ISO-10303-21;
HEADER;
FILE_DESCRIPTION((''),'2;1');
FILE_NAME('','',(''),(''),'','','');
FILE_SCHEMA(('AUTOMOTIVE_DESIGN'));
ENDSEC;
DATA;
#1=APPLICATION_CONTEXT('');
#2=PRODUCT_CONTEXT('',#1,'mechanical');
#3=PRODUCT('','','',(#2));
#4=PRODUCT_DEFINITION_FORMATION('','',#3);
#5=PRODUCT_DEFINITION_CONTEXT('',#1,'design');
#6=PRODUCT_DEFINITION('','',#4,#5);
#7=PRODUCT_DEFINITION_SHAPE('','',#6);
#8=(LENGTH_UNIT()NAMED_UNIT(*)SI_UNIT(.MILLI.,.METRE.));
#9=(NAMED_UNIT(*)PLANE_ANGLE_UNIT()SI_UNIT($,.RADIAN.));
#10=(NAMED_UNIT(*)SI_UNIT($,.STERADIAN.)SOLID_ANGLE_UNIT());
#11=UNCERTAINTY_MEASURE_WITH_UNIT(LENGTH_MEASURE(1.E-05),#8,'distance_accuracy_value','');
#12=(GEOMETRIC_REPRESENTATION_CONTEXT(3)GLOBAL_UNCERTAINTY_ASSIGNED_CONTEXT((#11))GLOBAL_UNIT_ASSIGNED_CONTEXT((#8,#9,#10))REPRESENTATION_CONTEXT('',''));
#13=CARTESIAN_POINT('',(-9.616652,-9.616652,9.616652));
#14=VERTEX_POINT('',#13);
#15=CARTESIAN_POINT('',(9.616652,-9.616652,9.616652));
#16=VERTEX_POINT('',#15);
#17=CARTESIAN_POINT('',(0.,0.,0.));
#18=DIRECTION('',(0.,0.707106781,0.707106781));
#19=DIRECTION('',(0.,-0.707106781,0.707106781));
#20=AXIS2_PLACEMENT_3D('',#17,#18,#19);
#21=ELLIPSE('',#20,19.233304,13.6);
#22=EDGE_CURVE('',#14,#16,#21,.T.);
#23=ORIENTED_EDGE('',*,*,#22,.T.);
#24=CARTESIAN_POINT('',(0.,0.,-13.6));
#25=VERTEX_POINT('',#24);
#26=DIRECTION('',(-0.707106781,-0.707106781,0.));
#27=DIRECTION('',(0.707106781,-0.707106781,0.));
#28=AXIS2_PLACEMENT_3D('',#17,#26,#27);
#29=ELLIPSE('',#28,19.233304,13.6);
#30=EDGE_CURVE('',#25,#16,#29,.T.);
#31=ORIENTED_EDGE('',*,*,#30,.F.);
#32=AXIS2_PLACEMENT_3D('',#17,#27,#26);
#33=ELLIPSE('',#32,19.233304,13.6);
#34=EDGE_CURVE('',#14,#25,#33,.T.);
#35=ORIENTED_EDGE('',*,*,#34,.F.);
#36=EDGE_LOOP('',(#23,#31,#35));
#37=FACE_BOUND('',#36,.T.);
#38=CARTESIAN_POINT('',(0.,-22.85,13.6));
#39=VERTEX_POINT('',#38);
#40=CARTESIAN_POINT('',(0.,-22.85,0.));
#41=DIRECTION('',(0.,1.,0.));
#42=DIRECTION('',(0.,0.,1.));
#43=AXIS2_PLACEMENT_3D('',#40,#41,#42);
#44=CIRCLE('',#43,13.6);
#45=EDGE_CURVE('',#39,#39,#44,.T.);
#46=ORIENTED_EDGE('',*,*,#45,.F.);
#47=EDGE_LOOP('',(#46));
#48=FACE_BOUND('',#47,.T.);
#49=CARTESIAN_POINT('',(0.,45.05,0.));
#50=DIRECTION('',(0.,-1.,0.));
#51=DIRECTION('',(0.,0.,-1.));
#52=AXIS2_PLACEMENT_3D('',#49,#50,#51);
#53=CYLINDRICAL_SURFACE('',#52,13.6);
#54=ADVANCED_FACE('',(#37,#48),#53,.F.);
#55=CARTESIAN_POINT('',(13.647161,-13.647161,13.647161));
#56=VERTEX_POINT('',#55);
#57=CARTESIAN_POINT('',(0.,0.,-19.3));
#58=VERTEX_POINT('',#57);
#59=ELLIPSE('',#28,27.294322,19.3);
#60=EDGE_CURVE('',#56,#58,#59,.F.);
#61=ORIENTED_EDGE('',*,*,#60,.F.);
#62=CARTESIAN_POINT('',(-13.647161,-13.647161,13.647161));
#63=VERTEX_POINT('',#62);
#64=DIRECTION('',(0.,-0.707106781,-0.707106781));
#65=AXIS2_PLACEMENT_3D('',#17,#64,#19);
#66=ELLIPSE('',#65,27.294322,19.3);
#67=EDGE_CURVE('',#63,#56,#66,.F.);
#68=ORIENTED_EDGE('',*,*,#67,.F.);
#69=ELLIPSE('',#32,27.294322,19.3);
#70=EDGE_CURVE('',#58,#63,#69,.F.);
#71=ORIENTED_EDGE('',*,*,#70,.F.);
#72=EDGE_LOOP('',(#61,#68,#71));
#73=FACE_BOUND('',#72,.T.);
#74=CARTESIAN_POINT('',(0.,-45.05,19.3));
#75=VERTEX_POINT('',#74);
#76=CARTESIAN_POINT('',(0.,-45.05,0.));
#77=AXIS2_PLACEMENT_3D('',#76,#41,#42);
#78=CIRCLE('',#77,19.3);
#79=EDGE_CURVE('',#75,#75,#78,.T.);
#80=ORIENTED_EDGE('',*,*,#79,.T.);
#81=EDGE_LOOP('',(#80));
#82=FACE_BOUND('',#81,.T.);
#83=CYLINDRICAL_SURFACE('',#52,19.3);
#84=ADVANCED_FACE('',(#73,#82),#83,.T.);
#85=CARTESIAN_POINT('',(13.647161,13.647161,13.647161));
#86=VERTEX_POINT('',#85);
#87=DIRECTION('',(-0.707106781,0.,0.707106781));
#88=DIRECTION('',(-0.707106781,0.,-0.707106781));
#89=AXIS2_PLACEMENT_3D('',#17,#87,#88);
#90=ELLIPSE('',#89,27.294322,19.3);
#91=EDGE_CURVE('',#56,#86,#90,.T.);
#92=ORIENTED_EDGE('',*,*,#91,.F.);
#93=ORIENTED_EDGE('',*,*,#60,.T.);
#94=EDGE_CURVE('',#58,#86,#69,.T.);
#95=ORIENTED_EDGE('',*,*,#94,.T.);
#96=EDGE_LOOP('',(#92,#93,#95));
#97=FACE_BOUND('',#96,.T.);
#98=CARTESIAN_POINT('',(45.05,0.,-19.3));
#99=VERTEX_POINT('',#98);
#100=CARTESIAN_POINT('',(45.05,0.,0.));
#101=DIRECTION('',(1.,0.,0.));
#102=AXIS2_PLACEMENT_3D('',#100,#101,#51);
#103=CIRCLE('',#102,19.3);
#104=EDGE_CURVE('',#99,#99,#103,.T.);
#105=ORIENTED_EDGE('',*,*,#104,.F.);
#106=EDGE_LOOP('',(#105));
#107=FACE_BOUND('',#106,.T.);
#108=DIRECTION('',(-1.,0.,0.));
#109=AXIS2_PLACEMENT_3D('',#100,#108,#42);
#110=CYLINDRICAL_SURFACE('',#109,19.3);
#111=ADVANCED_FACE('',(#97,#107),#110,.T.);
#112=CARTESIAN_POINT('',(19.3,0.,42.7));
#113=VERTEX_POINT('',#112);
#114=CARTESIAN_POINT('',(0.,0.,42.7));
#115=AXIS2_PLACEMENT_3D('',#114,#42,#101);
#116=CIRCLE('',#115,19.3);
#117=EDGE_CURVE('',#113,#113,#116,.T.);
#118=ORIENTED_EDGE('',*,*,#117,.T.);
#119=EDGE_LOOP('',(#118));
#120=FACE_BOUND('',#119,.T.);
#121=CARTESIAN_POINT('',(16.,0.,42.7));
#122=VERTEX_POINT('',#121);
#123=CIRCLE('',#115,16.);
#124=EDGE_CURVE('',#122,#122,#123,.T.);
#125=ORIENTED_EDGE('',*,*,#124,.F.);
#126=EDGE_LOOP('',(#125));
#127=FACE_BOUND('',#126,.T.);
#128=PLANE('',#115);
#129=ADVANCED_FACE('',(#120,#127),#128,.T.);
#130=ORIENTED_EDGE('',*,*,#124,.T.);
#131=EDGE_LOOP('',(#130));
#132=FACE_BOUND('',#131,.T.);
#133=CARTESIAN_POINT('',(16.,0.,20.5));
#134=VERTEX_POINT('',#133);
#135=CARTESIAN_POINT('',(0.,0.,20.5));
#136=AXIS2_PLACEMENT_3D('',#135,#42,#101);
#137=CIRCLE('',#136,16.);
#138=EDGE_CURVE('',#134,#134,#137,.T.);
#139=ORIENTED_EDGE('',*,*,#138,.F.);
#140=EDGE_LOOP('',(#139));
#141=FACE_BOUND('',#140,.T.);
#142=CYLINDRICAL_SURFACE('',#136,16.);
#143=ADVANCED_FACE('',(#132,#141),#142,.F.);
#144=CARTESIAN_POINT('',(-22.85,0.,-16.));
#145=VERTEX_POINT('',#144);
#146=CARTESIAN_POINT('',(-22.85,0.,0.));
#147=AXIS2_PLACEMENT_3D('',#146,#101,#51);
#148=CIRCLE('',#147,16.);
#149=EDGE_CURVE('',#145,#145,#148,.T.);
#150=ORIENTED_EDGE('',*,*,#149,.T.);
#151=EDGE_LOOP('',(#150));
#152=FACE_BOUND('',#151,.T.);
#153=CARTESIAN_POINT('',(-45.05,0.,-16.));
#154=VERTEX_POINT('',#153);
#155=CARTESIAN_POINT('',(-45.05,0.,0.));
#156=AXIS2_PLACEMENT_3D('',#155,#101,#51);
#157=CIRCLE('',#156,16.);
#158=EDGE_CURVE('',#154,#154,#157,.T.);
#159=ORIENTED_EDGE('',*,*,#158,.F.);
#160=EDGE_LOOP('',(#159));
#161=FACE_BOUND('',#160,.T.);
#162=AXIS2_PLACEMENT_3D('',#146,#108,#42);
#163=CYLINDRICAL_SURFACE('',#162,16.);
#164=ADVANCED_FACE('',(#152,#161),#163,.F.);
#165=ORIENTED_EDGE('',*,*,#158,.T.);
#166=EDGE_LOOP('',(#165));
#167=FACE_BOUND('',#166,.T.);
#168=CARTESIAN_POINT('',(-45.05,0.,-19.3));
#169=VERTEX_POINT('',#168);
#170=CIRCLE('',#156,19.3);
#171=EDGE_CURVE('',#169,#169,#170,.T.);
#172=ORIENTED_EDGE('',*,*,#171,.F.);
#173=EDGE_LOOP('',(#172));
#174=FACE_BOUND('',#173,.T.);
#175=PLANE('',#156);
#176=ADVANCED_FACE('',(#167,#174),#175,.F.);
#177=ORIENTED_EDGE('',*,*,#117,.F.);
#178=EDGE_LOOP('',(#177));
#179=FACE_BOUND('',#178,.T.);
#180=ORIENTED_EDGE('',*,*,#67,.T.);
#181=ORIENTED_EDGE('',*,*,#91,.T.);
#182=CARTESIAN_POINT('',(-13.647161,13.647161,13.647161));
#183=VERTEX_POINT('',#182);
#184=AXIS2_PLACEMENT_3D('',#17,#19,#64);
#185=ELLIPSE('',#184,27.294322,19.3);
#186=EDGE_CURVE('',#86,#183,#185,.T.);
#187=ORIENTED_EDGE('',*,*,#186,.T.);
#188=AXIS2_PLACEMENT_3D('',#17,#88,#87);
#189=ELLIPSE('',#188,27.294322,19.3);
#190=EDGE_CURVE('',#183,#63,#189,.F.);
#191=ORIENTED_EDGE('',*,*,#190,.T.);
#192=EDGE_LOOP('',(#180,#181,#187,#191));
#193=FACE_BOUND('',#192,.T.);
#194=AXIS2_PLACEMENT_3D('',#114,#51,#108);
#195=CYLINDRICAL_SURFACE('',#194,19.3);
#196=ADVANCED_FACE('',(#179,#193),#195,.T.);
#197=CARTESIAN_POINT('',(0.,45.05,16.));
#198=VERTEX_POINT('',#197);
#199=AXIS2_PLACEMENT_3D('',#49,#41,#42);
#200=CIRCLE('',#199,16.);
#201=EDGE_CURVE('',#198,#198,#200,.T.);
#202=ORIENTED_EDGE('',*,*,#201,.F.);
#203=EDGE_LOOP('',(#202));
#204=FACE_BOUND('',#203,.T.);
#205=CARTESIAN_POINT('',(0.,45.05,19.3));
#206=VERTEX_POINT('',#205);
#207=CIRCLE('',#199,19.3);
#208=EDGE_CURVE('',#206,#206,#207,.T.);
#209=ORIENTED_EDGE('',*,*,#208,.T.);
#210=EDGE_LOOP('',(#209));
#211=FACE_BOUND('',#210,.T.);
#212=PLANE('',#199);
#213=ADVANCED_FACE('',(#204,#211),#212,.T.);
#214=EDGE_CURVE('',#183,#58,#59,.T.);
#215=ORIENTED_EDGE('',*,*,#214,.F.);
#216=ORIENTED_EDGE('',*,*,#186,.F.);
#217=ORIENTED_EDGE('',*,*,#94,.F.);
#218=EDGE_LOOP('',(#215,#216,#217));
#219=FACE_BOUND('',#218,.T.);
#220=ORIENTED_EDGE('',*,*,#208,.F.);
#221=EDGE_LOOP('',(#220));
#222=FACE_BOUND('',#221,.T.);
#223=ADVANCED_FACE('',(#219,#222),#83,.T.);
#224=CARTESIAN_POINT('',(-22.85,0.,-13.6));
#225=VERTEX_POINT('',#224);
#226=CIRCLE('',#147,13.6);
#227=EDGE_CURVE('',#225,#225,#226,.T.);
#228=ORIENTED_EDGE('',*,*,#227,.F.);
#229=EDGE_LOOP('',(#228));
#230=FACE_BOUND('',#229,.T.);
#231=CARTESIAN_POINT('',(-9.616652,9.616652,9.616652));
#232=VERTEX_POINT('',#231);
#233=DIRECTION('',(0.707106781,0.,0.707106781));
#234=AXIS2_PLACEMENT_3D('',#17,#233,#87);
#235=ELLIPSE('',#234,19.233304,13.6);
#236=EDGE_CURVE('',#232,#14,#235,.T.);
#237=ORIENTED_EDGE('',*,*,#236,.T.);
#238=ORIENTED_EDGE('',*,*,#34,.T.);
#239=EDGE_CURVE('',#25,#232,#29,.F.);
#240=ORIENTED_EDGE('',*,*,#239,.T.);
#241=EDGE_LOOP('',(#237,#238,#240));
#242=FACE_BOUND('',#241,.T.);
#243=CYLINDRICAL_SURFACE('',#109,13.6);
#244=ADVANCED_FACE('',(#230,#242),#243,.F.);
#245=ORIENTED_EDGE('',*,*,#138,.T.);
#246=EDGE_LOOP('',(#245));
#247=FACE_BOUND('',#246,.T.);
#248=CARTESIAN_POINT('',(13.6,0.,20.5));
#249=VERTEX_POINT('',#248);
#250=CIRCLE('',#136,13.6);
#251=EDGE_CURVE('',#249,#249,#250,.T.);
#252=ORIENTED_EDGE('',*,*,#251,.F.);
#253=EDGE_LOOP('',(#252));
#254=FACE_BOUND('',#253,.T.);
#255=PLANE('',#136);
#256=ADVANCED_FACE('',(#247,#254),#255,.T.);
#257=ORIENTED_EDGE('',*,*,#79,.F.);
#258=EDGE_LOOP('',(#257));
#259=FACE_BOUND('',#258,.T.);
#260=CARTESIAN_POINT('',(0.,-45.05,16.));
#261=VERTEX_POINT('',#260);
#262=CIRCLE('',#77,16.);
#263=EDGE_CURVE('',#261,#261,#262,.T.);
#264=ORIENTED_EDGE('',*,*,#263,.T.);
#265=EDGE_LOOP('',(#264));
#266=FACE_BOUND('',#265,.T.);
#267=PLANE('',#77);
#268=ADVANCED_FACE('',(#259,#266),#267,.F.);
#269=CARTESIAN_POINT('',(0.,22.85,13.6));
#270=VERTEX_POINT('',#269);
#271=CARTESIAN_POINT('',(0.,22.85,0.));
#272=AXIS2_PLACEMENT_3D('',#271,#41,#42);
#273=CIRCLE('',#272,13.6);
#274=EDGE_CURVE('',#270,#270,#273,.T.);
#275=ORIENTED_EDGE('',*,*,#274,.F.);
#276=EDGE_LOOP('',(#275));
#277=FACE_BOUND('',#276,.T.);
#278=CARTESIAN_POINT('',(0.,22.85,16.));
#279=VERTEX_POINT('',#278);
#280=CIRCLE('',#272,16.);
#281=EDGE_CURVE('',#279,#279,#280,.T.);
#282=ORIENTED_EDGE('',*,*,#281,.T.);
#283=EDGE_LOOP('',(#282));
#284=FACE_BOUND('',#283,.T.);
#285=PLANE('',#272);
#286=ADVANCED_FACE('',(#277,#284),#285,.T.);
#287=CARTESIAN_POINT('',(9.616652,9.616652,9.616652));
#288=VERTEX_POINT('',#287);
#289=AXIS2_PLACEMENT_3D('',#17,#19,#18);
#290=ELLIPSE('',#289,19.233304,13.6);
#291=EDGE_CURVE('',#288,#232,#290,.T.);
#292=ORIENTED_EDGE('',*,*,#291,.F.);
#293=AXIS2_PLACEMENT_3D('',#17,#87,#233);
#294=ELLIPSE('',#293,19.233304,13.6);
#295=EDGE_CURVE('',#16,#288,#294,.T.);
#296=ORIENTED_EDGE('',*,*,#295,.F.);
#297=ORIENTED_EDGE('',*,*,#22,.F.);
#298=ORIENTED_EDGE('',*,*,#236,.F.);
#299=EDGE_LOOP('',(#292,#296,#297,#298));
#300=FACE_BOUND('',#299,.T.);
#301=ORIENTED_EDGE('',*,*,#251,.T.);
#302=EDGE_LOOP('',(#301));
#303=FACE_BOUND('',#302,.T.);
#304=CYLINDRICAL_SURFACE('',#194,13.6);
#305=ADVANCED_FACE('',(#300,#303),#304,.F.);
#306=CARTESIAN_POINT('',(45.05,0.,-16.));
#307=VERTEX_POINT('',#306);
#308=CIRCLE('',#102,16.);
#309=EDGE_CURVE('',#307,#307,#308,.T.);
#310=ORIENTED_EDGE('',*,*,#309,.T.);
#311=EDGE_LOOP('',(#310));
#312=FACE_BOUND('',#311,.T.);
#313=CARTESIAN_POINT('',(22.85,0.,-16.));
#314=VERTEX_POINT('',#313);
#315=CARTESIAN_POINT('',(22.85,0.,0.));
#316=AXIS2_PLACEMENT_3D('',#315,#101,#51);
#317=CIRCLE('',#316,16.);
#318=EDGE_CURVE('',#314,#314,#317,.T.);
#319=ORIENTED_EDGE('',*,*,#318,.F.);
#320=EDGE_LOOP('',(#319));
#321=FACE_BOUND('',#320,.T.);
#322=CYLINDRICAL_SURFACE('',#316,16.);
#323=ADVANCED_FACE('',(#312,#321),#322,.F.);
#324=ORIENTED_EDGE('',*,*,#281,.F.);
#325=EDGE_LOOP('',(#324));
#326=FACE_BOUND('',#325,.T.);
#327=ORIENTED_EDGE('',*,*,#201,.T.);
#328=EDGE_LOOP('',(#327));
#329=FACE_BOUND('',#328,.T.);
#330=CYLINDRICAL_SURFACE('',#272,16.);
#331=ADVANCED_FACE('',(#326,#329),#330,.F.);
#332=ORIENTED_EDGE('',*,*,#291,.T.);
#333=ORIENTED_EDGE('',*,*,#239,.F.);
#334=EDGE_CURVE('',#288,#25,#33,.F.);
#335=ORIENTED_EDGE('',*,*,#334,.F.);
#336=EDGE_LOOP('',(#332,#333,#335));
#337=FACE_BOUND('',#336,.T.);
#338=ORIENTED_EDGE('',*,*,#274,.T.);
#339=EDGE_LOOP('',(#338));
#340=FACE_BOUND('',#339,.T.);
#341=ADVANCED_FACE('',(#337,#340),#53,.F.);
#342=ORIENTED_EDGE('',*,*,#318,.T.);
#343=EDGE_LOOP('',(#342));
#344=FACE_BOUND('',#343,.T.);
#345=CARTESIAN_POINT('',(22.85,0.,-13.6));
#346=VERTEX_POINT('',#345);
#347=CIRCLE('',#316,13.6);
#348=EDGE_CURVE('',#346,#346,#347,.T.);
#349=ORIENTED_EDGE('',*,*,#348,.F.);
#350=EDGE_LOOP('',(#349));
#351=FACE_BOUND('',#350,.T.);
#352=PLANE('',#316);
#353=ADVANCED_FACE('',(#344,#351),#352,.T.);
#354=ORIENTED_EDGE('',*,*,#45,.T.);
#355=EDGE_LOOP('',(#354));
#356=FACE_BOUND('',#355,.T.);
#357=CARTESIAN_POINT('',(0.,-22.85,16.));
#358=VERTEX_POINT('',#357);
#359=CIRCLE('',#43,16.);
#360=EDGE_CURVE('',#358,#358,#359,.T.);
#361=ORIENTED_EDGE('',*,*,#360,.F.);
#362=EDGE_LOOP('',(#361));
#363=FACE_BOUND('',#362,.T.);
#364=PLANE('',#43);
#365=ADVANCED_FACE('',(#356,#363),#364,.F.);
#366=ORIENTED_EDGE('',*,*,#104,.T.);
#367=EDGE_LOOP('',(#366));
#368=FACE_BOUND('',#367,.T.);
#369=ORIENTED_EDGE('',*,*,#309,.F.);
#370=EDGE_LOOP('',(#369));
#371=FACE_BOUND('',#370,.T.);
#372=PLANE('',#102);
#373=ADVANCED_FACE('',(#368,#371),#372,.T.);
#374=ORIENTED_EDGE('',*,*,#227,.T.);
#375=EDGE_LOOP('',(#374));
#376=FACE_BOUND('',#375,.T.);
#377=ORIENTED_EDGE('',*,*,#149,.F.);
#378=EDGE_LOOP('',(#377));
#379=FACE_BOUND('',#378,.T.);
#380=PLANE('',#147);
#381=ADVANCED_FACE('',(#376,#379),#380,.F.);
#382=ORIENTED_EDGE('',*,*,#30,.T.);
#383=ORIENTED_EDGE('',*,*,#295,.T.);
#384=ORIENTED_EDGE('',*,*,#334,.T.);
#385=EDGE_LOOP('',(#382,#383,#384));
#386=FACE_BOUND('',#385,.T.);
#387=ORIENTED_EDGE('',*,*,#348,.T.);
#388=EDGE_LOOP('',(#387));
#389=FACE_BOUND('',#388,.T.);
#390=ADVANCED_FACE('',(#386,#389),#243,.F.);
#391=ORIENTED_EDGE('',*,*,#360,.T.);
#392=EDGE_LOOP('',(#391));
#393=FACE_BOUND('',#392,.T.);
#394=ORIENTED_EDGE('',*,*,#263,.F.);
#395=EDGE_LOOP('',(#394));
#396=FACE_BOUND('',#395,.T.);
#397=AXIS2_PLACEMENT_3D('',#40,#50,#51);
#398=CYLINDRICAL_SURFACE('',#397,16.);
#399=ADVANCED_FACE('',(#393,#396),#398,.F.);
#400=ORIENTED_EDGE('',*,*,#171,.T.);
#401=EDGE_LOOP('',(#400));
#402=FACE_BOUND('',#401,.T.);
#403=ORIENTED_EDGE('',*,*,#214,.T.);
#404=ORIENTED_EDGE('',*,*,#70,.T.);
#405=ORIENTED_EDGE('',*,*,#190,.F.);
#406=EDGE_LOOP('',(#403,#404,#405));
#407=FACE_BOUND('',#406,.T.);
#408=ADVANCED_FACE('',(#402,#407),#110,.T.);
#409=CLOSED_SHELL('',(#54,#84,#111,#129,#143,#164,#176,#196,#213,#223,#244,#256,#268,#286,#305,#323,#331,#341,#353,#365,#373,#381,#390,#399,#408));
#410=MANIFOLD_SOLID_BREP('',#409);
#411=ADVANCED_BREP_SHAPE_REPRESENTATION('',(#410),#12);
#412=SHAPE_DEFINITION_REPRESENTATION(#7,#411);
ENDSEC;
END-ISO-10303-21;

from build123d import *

# Parameters (mm, degrees)
SKETCH_1_R               = 19.3
SKETCH_1_R_2             = 13.6
EXTRUDE_1_DEPTH          = 45.05
SKETCH_3_R               = 19.3
SKETCH_3_R_2             = 13.6
EXTRUDE_3_DEPTH          = 45.05
SKETCH_2_R               = 19.3
SKETCH_2_R_2             = 13.6
EXTRUDE_2_DEPTH          = 42.7
CUT_EXTRUDE_1_DEPTH      = 77.696121327
CUT_EXTRUDE_1_DEPTH_BACK = 77.696121327
SKETCH_1_13_R            = 13.6
CUT_EXTRUDE_START        = -19.3000001
CUT_EXTRUDE_2_OUTLINE_R  = 13.6
CUT_EXTRUDE_2_DEPTH      = 38.6000002
CUT_EXTRUDE_START_2      = 9.616652
SKETCH_2_8_R             = 13.6
CUT_EXTRUDE_3_DEPTH      = 9.683348
CUT_EXTRUDE_START_3      = -45.05
SKETCH_1_15_R            = 16
CUT_EXTRUDE_4_DEPTH      = 22.2
CUT_EXTRUDE_START_4      = 22.85
SKETCH_1_16_R            = 16
CUT_EXTRUDE_5_DEPTH      = 22.2
SKETCH_3_9_R             = 16
CUT_EXTRUDE_6_DEPTH      = 22.2
SKETCH_3_10_R            = 16
CUT_EXTRUDE_7_DEPTH      = 22.2
CUT_EXTRUDE_START_5      = 20.5
SKETCH_2_9_R             = 16
SKETCH_2_9_R_2           = 13.6
CUT_EXTRUDE_8_DEPTH      = 22.2


# Read off the part's stored shape, not the designer's step: 切除-拉伸2
with BuildPart() as part:
    # 草图1 → 凸台-拉伸1 (new, symmetric)
    with BuildSketch(Plane(origin=(0, 0, 0), x_dir=(1, 0, 0), z_dir=(0, 1, 0))):
        with Locations(Location((0, 0, 0), (0, 0, 270))):
            Circle(SKETCH_1_R)
        with Locations(Location((0, 0, 0), (0, 0, 270))):
            Circle(SKETCH_1_R_2, mode=Mode.SUBTRACT)
    extrude(amount=EXTRUDE_1_DEPTH, both=True)

    # 草图3 → 凸台-拉伸3 (add, symmetric)
    with BuildSketch(Plane(origin=(0, 0, 0), x_dir=(0, 0, -1), z_dir=(1, 0, 0))):
        Circle(SKETCH_3_R)
        with Locations(Location((0, 0, 0), (0, 0, 135.000000053))):
            Circle(SKETCH_3_R_2, mode=Mode.SUBTRACT)
    extrude(amount=EXTRUDE_3_DEPTH, both=True)

    # 草图2 → 凸台-拉伸2 (add)
    with BuildSketch(Plane.XY):
        with Locations(Location((0, 0, 0), (0, 0, 225))):
            Circle(SKETCH_2_R)
        with Locations(Location((0, 0, 0), (0, 0, 224.999996881))):
            Circle(SKETCH_2_R_2, mode=Mode.SUBTRACT)
    extrude(amount=EXTRUDE_2_DEPTH)

    # 草图1<13> → 切除-拉伸1 (cut, two sides: drawn at the far end of the back side and taken through both)
    with BuildSketch(Plane(origin=(0, 0, 0), x_dir=(1, 0, 0), z_dir=(0, 1, 0)).offset(-CUT_EXTRUDE_1_DEPTH_BACK)):
        with Locations(Location((0, 0, 0), (0, 0, 270))):
            Circle(SKETCH_1_13_R)
    extrude(amount=CUT_EXTRUDE_1_DEPTH + CUT_EXTRUDE_1_DEPTH_BACK, mode=Mode.SUBTRACT)

    # 切除-拉伸2 outline → 切除-拉伸2 (cut)
    with BuildSketch(Plane(origin=(0, 0, 0), x_dir=(0, 0, -1), z_dir=(1, 0, 0)).offset(CUT_EXTRUDE_START)):
        Circle(CUT_EXTRUDE_2_OUTLINE_R)
    extrude(amount=CUT_EXTRUDE_2_DEPTH, mode=Mode.SUBTRACT)

    # 草图2<8> → 切除-拉伸3 (cut)
    with BuildSketch(Plane.XY.offset(CUT_EXTRUDE_START_2)):
        with Locations(Location((0, 0, 0), (0, 0, 225))):
            Circle(SKETCH_2_8_R)
    extrude(amount=CUT_EXTRUDE_3_DEPTH, mode=Mode.SUBTRACT)

    # 草图1<15> → 切除-拉伸4 (cut)
    with BuildSketch(Plane(origin=(0, 0, 0), x_dir=(1, 0, 0), z_dir=(0, 1, 0)).offset(CUT_EXTRUDE_START_3)):
        with Locations(Location((0, 0, 0), (0, 0, 270))):
            Circle(SKETCH_1_15_R)
    extrude(amount=CUT_EXTRUDE_4_DEPTH, mode=Mode.SUBTRACT)

    # 草图1<16> → 切除-拉伸5 (cut)
    with BuildSketch(Plane(origin=(0, 0, 0), x_dir=(1, 0, 0), z_dir=(0, 1, 0)).offset(CUT_EXTRUDE_START_4)):
        with Locations(Location((0, 0, 0), (0, 0, 270))):
            Circle(SKETCH_1_16_R)
    extrude(amount=CUT_EXTRUDE_5_DEPTH, mode=Mode.SUBTRACT)

    # 草图3<9> → 切除-拉伸6 (cut)
    with BuildSketch(Plane(origin=(0, 0, 0), x_dir=(0, 0, -1), z_dir=(1, 0, 0)).offset(CUT_EXTRUDE_START_3)):
        Circle(SKETCH_3_9_R)
    extrude(amount=CUT_EXTRUDE_6_DEPTH, mode=Mode.SUBTRACT)

    # 草图3<10> → 切除-拉伸7 (cut)
    with BuildSketch(Plane(origin=(0, 0, 0), x_dir=(0, 0, -1), z_dir=(1, 0, 0)).offset(CUT_EXTRUDE_START_4)):
        Circle(SKETCH_3_10_R)
    extrude(amount=CUT_EXTRUDE_7_DEPTH, mode=Mode.SUBTRACT)

    # 草图2<9> → 切除-拉伸8 (cut)
    with BuildSketch(Plane.XY.offset(CUT_EXTRUDE_START_5)):
        Circle(SKETCH_2_9_R)
        with Locations(Location((0, 0, 0), (0, 0, 225))):
            Circle(SKETCH_2_9_R_2, mode=Mode.SUBTRACT)
    extrude(amount=CUT_EXTRUDE_8_DEPTH, mode=Mode.SUBTRACT)


solid = part.part
